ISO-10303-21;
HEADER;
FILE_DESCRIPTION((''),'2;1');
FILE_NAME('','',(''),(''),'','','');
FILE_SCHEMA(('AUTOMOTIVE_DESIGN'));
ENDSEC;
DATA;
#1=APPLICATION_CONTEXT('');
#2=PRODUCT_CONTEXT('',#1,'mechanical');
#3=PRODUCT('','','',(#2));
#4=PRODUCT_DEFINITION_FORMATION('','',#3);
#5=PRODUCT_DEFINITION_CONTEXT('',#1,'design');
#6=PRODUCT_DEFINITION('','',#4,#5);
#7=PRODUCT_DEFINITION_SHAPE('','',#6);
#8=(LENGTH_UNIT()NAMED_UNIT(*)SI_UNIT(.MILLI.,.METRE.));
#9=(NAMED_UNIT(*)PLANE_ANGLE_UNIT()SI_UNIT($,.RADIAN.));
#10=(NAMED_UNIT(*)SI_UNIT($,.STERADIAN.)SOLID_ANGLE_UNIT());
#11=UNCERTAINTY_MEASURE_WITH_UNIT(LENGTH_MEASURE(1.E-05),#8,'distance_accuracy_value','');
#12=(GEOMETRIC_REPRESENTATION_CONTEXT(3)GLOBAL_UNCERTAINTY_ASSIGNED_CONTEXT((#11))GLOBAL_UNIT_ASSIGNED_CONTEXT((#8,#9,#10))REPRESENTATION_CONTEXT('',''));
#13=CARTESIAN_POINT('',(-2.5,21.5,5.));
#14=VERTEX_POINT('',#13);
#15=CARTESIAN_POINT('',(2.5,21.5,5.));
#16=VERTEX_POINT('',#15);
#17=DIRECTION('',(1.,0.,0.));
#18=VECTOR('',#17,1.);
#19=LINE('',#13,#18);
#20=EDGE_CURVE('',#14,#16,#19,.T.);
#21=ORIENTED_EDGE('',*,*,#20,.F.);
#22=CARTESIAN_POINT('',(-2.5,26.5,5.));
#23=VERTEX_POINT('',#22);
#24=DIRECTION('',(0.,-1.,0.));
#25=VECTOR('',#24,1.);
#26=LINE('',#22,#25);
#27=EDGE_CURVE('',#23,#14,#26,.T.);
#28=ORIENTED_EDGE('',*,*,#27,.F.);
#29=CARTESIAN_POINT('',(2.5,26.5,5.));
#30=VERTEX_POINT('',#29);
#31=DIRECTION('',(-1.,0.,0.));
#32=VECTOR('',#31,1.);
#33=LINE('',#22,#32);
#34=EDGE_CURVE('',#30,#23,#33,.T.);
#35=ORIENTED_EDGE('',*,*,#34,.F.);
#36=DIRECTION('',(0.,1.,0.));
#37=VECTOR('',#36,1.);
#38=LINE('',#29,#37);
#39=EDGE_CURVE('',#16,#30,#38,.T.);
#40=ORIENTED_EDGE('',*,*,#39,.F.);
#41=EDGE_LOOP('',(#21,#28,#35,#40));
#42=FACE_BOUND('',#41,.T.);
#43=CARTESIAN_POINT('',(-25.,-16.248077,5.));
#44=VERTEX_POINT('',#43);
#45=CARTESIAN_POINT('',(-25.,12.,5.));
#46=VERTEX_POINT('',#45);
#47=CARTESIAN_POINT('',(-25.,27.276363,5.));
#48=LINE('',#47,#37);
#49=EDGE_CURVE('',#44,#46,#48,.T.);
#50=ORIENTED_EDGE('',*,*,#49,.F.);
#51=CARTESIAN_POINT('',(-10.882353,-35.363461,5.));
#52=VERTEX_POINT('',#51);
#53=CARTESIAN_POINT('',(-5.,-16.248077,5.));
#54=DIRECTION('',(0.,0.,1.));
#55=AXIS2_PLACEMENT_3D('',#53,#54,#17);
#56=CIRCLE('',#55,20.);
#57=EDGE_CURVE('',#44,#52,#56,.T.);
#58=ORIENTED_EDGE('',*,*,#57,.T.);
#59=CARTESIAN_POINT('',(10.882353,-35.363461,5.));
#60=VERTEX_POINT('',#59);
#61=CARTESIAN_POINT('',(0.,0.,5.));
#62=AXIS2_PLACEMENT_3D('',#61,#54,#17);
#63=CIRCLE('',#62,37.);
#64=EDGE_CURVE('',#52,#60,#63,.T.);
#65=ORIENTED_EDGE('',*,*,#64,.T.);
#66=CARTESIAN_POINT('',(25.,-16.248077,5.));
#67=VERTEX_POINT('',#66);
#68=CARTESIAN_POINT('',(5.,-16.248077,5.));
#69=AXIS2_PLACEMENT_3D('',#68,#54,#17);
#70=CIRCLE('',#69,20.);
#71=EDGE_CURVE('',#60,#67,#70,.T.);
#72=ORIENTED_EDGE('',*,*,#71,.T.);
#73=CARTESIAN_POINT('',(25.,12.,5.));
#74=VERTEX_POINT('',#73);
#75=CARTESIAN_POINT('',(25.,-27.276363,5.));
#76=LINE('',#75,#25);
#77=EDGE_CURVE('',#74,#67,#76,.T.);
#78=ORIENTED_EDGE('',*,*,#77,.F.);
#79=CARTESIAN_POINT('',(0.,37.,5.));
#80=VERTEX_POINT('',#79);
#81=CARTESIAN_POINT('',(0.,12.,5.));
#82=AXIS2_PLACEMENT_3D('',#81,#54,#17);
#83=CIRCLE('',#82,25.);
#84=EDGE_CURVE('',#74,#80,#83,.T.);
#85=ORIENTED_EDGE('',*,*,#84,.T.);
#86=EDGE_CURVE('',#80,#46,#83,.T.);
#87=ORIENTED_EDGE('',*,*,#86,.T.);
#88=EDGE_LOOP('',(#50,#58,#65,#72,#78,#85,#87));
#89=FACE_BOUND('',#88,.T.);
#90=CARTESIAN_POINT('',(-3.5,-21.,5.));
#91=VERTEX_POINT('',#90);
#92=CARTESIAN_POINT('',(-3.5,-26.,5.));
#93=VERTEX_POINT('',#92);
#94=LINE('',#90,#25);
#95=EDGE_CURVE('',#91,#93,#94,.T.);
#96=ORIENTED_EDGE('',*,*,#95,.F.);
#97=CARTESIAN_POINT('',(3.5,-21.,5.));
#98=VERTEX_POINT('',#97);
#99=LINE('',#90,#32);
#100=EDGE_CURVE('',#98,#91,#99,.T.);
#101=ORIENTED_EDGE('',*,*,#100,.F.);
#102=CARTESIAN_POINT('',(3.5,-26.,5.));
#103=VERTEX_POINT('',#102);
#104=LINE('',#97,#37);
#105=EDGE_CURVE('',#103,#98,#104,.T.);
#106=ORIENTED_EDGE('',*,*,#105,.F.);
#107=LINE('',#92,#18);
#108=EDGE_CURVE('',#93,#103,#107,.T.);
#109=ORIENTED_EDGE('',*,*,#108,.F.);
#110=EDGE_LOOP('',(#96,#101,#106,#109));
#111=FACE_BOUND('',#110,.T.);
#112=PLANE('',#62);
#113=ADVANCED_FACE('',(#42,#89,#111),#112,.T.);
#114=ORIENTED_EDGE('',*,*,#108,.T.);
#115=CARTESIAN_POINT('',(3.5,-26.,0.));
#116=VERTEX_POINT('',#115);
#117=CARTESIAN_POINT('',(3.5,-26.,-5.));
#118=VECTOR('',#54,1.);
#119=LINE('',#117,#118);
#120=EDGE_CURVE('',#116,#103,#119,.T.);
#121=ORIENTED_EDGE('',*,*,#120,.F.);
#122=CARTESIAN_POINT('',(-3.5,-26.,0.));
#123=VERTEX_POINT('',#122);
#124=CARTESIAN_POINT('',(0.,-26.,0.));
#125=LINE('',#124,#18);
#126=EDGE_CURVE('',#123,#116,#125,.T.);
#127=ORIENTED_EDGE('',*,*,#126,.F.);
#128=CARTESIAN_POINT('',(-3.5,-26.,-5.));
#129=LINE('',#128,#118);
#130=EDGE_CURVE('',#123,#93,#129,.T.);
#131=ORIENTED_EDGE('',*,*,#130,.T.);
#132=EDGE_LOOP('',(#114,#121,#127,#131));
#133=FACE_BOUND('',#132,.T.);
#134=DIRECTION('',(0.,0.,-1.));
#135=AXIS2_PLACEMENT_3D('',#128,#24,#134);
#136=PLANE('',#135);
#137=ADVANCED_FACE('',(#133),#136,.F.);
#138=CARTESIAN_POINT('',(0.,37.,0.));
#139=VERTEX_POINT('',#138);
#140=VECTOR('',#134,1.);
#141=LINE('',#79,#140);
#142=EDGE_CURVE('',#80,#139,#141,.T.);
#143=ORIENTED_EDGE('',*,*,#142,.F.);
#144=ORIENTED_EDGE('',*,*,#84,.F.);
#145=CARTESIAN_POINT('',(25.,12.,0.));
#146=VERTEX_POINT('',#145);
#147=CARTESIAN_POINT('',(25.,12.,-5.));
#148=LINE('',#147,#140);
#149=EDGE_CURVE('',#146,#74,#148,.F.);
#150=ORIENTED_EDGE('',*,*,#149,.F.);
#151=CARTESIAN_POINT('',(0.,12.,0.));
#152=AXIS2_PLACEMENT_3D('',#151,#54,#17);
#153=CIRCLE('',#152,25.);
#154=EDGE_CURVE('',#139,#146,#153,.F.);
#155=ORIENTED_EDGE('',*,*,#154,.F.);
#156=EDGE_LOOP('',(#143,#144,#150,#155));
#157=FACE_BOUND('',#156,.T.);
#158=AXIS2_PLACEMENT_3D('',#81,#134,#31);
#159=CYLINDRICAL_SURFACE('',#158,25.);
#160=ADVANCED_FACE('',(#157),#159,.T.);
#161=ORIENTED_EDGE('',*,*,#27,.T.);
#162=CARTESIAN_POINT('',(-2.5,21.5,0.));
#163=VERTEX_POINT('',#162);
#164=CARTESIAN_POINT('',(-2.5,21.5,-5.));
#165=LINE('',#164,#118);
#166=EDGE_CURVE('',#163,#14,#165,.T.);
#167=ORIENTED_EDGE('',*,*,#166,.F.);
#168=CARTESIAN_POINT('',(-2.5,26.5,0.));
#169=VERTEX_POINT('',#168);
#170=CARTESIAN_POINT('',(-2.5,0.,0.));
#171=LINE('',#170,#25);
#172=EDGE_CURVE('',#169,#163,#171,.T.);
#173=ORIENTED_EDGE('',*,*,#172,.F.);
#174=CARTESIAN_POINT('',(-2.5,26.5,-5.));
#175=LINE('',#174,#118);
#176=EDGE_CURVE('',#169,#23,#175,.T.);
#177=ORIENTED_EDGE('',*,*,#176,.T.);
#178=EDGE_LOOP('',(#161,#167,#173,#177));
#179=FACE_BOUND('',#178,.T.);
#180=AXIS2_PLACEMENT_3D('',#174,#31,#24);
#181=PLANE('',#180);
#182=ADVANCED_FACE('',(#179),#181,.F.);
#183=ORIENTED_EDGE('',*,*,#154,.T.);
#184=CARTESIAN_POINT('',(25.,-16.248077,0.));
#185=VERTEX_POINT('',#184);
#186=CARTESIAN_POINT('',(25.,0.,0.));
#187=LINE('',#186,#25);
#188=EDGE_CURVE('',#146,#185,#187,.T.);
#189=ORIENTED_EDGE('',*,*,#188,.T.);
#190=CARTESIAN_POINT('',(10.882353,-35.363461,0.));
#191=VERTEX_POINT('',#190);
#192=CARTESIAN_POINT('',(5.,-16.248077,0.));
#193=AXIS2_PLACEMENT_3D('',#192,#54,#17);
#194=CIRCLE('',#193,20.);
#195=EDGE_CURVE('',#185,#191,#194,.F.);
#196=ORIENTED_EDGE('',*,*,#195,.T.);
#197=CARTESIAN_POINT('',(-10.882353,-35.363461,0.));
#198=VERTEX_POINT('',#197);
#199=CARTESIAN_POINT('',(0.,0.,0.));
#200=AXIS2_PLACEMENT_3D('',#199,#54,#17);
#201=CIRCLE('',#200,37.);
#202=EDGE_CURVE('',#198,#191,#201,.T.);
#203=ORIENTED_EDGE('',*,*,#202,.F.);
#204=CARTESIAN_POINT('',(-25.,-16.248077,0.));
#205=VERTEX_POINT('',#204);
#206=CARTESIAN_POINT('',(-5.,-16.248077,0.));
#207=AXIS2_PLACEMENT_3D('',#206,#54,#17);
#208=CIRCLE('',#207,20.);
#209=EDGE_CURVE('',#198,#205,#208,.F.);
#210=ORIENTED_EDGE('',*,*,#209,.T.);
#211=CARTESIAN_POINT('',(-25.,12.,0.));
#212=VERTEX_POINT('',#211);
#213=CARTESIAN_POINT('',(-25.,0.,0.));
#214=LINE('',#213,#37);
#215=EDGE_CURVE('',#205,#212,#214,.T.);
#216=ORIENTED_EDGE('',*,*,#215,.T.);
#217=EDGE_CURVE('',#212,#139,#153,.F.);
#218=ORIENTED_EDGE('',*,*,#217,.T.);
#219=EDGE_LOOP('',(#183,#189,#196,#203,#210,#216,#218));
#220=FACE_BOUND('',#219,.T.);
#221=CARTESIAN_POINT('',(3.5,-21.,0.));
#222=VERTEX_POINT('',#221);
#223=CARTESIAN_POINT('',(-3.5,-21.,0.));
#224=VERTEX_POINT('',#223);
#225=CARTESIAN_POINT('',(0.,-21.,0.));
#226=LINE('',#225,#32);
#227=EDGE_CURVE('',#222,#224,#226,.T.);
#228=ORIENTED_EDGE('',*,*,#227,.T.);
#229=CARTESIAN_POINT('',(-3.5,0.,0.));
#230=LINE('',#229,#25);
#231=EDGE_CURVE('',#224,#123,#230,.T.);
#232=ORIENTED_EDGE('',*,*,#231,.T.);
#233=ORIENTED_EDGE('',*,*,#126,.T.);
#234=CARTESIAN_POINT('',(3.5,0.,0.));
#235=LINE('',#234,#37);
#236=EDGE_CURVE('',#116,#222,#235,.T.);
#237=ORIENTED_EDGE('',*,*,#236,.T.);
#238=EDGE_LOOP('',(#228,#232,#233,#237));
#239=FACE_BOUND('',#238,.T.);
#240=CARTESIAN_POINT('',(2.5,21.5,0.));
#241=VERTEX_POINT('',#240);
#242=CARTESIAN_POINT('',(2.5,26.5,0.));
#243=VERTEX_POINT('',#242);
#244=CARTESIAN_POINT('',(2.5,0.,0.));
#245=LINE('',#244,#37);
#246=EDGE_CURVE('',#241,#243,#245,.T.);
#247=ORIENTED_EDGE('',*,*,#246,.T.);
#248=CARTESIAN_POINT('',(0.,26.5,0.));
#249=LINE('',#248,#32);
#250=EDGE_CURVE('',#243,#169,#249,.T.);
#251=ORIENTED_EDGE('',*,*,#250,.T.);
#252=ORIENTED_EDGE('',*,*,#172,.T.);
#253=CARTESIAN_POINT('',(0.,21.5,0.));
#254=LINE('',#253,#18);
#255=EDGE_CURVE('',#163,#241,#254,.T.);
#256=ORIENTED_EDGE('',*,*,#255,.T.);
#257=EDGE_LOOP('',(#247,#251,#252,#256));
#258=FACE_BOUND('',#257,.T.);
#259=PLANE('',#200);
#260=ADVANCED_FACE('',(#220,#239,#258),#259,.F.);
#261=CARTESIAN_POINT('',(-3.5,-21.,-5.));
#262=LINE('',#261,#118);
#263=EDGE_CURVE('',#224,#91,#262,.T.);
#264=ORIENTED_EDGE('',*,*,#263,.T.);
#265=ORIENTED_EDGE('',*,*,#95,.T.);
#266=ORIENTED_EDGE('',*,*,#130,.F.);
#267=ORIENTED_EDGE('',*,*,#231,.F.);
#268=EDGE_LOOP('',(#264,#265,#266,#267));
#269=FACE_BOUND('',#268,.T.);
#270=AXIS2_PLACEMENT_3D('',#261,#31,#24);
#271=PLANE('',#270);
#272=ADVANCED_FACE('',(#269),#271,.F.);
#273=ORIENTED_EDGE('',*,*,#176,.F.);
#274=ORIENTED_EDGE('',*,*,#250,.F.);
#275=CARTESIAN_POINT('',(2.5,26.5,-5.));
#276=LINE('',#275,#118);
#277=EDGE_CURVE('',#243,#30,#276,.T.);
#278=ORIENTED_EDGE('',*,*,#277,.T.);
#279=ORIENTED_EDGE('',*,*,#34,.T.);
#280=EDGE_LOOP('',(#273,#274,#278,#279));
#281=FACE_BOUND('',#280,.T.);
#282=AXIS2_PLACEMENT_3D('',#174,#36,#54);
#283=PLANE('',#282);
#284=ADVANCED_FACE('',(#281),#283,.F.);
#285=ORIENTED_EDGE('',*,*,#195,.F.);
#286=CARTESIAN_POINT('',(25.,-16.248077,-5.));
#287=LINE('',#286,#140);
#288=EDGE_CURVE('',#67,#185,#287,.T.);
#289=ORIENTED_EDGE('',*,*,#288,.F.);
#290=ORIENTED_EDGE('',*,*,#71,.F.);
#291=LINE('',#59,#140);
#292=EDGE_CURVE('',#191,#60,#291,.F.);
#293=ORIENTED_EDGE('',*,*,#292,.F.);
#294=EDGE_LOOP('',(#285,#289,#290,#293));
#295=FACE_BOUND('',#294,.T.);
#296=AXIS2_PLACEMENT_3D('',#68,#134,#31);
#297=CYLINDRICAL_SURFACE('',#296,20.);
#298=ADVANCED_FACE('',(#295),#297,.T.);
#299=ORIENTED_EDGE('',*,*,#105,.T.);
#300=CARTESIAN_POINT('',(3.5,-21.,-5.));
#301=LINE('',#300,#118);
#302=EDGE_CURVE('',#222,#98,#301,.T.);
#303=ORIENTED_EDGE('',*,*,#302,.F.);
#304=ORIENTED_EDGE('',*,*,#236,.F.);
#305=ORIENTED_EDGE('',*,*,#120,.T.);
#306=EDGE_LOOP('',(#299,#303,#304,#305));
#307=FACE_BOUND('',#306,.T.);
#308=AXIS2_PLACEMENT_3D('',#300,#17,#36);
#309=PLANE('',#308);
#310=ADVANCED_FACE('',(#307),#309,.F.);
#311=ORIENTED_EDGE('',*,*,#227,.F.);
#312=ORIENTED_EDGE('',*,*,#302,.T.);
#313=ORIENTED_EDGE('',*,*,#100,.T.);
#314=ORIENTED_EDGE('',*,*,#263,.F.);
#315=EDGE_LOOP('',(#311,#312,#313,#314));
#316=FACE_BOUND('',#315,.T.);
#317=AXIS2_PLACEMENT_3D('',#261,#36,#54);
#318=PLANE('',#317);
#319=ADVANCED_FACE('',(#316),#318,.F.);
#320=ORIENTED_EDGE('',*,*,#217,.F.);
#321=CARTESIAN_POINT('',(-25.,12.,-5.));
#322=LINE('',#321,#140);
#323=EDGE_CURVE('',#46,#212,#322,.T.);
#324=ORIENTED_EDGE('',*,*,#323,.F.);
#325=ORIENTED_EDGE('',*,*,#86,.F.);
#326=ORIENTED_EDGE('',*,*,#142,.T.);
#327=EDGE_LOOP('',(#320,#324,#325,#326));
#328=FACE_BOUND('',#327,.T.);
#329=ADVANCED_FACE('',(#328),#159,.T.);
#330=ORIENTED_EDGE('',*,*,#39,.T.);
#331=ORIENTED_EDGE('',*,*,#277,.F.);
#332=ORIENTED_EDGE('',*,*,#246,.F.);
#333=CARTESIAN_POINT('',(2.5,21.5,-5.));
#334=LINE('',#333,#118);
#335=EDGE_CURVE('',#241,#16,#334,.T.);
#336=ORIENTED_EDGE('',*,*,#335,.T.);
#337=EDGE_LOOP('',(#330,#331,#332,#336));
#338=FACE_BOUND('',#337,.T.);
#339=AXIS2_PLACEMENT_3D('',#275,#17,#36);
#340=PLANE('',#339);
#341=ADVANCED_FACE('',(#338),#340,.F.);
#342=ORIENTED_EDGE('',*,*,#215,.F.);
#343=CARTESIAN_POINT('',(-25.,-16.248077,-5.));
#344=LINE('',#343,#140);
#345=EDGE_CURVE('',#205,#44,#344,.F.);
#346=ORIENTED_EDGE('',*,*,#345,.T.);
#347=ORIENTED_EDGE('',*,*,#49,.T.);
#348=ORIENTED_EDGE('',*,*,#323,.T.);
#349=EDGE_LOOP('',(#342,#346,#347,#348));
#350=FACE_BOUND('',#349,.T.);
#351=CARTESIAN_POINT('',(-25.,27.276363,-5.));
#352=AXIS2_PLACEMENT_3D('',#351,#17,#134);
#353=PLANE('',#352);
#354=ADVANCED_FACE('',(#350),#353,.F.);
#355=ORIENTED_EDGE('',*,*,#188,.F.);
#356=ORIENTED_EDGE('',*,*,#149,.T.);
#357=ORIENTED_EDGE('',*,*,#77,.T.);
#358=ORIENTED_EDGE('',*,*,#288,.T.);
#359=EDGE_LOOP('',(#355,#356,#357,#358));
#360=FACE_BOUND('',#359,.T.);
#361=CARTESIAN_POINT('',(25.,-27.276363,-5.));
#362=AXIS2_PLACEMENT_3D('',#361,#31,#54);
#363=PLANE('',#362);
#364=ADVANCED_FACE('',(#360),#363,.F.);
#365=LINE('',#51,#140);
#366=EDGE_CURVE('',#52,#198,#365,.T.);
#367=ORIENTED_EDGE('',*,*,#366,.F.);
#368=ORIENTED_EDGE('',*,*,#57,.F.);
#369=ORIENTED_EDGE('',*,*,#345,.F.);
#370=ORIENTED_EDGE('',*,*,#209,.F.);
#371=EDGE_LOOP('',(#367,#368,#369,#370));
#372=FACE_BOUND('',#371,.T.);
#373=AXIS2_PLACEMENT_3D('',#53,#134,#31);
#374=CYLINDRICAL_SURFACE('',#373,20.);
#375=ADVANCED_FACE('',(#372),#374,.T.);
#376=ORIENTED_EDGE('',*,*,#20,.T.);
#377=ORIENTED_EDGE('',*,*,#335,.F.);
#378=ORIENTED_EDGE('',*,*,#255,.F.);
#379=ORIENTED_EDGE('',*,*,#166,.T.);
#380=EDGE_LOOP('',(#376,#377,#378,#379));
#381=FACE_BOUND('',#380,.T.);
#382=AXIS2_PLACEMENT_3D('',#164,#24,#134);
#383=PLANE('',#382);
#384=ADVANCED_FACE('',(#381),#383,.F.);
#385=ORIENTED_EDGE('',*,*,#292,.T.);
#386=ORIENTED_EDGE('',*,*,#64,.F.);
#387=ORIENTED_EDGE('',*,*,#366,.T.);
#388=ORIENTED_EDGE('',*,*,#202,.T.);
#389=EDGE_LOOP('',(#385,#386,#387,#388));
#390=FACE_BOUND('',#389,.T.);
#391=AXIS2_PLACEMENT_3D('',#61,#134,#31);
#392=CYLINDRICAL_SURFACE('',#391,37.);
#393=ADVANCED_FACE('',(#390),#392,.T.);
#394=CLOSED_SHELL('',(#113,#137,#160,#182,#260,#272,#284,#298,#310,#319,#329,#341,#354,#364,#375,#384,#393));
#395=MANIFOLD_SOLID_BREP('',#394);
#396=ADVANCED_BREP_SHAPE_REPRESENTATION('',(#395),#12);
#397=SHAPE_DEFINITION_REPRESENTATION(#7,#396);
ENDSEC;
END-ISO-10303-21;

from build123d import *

# Parameters (mm, degrees)
SKETCH1_R           = 37
BOSS_EXTRUDE1_DEPTH = 5
CUT_EXTRUDE3_START  = -10
CUT_EXTRUDE3_DEPTH  = 10
FILLET2_R           = 25
FILLET3_R           = 20
SKETCH7_W           = 5
SKETCH7_H           = 5
SKETCH7_W_2         = 7
CUT_EXTRUDE4_DEPTH  = 10


with BuildPart() as part:
    # Sketch1 → Boss-Extrude1 (new body)
    with BuildSketch(Plane.XY):
        Circle(SKETCH1_R)
    extrude(amount=BOSS_EXTRUDE1_DEPTH)

    # Sketch6 → Cut-Extrude3 (cut)
    with BuildSketch(Plane.XY.offset(5).offset(CUT_EXTRUDE3_START)):
        with BuildLine():
            Line((-25, 27.276363394), (-25, -27.276363394))
            ThreePointArc((-25, -27.276363394), (-37, 0), (-25, 27.276363394))
        make_face()
        with BuildLine():
            Line((25, -27.276363394), (25, 27.276363394))
            ThreePointArc((25, 27.276363394), (37, 0), (25, -27.276363394))
        make_face()
    extrude(amount=CUT_EXTRUDE3_DEPTH, mode=Mode.SUBTRACT)

    # Fillet2
    fillet2_edges = [part.edges().sort_by_distance(p)[0] for p in [
        (-25, 27.276363394, 2.5),
        (25, 27.276363394, 2.5),
    ]]
    fillet(fillet2_edges, radius=FILLET2_R - 0.0001)  # a hair under: the kernel refuses the full size

    # Fillet3
    fillet3_edges = [part.edges().sort_by_distance(p)[0] for p in [
        (-25, -27.276363394, 2.5),
        (25, -27.276363394, 2.5),
    ]]
    fillet(fillet3_edges, radius=FILLET3_R)

    # Sketch7 → Cut-Extrude4 (cut)
    with BuildSketch(Plane.XY.offset(5)):
        with Locations((0, 24)):
            Rectangle(SKETCH7_W, SKETCH7_H)
        with Locations((0, -23.5)):
            Rectangle(SKETCH7_W_2, SKETCH7_H)
    extrude(amount=-CUT_EXTRUDE4_DEPTH, mode=Mode.SUBTRACT)


solid = part.part
